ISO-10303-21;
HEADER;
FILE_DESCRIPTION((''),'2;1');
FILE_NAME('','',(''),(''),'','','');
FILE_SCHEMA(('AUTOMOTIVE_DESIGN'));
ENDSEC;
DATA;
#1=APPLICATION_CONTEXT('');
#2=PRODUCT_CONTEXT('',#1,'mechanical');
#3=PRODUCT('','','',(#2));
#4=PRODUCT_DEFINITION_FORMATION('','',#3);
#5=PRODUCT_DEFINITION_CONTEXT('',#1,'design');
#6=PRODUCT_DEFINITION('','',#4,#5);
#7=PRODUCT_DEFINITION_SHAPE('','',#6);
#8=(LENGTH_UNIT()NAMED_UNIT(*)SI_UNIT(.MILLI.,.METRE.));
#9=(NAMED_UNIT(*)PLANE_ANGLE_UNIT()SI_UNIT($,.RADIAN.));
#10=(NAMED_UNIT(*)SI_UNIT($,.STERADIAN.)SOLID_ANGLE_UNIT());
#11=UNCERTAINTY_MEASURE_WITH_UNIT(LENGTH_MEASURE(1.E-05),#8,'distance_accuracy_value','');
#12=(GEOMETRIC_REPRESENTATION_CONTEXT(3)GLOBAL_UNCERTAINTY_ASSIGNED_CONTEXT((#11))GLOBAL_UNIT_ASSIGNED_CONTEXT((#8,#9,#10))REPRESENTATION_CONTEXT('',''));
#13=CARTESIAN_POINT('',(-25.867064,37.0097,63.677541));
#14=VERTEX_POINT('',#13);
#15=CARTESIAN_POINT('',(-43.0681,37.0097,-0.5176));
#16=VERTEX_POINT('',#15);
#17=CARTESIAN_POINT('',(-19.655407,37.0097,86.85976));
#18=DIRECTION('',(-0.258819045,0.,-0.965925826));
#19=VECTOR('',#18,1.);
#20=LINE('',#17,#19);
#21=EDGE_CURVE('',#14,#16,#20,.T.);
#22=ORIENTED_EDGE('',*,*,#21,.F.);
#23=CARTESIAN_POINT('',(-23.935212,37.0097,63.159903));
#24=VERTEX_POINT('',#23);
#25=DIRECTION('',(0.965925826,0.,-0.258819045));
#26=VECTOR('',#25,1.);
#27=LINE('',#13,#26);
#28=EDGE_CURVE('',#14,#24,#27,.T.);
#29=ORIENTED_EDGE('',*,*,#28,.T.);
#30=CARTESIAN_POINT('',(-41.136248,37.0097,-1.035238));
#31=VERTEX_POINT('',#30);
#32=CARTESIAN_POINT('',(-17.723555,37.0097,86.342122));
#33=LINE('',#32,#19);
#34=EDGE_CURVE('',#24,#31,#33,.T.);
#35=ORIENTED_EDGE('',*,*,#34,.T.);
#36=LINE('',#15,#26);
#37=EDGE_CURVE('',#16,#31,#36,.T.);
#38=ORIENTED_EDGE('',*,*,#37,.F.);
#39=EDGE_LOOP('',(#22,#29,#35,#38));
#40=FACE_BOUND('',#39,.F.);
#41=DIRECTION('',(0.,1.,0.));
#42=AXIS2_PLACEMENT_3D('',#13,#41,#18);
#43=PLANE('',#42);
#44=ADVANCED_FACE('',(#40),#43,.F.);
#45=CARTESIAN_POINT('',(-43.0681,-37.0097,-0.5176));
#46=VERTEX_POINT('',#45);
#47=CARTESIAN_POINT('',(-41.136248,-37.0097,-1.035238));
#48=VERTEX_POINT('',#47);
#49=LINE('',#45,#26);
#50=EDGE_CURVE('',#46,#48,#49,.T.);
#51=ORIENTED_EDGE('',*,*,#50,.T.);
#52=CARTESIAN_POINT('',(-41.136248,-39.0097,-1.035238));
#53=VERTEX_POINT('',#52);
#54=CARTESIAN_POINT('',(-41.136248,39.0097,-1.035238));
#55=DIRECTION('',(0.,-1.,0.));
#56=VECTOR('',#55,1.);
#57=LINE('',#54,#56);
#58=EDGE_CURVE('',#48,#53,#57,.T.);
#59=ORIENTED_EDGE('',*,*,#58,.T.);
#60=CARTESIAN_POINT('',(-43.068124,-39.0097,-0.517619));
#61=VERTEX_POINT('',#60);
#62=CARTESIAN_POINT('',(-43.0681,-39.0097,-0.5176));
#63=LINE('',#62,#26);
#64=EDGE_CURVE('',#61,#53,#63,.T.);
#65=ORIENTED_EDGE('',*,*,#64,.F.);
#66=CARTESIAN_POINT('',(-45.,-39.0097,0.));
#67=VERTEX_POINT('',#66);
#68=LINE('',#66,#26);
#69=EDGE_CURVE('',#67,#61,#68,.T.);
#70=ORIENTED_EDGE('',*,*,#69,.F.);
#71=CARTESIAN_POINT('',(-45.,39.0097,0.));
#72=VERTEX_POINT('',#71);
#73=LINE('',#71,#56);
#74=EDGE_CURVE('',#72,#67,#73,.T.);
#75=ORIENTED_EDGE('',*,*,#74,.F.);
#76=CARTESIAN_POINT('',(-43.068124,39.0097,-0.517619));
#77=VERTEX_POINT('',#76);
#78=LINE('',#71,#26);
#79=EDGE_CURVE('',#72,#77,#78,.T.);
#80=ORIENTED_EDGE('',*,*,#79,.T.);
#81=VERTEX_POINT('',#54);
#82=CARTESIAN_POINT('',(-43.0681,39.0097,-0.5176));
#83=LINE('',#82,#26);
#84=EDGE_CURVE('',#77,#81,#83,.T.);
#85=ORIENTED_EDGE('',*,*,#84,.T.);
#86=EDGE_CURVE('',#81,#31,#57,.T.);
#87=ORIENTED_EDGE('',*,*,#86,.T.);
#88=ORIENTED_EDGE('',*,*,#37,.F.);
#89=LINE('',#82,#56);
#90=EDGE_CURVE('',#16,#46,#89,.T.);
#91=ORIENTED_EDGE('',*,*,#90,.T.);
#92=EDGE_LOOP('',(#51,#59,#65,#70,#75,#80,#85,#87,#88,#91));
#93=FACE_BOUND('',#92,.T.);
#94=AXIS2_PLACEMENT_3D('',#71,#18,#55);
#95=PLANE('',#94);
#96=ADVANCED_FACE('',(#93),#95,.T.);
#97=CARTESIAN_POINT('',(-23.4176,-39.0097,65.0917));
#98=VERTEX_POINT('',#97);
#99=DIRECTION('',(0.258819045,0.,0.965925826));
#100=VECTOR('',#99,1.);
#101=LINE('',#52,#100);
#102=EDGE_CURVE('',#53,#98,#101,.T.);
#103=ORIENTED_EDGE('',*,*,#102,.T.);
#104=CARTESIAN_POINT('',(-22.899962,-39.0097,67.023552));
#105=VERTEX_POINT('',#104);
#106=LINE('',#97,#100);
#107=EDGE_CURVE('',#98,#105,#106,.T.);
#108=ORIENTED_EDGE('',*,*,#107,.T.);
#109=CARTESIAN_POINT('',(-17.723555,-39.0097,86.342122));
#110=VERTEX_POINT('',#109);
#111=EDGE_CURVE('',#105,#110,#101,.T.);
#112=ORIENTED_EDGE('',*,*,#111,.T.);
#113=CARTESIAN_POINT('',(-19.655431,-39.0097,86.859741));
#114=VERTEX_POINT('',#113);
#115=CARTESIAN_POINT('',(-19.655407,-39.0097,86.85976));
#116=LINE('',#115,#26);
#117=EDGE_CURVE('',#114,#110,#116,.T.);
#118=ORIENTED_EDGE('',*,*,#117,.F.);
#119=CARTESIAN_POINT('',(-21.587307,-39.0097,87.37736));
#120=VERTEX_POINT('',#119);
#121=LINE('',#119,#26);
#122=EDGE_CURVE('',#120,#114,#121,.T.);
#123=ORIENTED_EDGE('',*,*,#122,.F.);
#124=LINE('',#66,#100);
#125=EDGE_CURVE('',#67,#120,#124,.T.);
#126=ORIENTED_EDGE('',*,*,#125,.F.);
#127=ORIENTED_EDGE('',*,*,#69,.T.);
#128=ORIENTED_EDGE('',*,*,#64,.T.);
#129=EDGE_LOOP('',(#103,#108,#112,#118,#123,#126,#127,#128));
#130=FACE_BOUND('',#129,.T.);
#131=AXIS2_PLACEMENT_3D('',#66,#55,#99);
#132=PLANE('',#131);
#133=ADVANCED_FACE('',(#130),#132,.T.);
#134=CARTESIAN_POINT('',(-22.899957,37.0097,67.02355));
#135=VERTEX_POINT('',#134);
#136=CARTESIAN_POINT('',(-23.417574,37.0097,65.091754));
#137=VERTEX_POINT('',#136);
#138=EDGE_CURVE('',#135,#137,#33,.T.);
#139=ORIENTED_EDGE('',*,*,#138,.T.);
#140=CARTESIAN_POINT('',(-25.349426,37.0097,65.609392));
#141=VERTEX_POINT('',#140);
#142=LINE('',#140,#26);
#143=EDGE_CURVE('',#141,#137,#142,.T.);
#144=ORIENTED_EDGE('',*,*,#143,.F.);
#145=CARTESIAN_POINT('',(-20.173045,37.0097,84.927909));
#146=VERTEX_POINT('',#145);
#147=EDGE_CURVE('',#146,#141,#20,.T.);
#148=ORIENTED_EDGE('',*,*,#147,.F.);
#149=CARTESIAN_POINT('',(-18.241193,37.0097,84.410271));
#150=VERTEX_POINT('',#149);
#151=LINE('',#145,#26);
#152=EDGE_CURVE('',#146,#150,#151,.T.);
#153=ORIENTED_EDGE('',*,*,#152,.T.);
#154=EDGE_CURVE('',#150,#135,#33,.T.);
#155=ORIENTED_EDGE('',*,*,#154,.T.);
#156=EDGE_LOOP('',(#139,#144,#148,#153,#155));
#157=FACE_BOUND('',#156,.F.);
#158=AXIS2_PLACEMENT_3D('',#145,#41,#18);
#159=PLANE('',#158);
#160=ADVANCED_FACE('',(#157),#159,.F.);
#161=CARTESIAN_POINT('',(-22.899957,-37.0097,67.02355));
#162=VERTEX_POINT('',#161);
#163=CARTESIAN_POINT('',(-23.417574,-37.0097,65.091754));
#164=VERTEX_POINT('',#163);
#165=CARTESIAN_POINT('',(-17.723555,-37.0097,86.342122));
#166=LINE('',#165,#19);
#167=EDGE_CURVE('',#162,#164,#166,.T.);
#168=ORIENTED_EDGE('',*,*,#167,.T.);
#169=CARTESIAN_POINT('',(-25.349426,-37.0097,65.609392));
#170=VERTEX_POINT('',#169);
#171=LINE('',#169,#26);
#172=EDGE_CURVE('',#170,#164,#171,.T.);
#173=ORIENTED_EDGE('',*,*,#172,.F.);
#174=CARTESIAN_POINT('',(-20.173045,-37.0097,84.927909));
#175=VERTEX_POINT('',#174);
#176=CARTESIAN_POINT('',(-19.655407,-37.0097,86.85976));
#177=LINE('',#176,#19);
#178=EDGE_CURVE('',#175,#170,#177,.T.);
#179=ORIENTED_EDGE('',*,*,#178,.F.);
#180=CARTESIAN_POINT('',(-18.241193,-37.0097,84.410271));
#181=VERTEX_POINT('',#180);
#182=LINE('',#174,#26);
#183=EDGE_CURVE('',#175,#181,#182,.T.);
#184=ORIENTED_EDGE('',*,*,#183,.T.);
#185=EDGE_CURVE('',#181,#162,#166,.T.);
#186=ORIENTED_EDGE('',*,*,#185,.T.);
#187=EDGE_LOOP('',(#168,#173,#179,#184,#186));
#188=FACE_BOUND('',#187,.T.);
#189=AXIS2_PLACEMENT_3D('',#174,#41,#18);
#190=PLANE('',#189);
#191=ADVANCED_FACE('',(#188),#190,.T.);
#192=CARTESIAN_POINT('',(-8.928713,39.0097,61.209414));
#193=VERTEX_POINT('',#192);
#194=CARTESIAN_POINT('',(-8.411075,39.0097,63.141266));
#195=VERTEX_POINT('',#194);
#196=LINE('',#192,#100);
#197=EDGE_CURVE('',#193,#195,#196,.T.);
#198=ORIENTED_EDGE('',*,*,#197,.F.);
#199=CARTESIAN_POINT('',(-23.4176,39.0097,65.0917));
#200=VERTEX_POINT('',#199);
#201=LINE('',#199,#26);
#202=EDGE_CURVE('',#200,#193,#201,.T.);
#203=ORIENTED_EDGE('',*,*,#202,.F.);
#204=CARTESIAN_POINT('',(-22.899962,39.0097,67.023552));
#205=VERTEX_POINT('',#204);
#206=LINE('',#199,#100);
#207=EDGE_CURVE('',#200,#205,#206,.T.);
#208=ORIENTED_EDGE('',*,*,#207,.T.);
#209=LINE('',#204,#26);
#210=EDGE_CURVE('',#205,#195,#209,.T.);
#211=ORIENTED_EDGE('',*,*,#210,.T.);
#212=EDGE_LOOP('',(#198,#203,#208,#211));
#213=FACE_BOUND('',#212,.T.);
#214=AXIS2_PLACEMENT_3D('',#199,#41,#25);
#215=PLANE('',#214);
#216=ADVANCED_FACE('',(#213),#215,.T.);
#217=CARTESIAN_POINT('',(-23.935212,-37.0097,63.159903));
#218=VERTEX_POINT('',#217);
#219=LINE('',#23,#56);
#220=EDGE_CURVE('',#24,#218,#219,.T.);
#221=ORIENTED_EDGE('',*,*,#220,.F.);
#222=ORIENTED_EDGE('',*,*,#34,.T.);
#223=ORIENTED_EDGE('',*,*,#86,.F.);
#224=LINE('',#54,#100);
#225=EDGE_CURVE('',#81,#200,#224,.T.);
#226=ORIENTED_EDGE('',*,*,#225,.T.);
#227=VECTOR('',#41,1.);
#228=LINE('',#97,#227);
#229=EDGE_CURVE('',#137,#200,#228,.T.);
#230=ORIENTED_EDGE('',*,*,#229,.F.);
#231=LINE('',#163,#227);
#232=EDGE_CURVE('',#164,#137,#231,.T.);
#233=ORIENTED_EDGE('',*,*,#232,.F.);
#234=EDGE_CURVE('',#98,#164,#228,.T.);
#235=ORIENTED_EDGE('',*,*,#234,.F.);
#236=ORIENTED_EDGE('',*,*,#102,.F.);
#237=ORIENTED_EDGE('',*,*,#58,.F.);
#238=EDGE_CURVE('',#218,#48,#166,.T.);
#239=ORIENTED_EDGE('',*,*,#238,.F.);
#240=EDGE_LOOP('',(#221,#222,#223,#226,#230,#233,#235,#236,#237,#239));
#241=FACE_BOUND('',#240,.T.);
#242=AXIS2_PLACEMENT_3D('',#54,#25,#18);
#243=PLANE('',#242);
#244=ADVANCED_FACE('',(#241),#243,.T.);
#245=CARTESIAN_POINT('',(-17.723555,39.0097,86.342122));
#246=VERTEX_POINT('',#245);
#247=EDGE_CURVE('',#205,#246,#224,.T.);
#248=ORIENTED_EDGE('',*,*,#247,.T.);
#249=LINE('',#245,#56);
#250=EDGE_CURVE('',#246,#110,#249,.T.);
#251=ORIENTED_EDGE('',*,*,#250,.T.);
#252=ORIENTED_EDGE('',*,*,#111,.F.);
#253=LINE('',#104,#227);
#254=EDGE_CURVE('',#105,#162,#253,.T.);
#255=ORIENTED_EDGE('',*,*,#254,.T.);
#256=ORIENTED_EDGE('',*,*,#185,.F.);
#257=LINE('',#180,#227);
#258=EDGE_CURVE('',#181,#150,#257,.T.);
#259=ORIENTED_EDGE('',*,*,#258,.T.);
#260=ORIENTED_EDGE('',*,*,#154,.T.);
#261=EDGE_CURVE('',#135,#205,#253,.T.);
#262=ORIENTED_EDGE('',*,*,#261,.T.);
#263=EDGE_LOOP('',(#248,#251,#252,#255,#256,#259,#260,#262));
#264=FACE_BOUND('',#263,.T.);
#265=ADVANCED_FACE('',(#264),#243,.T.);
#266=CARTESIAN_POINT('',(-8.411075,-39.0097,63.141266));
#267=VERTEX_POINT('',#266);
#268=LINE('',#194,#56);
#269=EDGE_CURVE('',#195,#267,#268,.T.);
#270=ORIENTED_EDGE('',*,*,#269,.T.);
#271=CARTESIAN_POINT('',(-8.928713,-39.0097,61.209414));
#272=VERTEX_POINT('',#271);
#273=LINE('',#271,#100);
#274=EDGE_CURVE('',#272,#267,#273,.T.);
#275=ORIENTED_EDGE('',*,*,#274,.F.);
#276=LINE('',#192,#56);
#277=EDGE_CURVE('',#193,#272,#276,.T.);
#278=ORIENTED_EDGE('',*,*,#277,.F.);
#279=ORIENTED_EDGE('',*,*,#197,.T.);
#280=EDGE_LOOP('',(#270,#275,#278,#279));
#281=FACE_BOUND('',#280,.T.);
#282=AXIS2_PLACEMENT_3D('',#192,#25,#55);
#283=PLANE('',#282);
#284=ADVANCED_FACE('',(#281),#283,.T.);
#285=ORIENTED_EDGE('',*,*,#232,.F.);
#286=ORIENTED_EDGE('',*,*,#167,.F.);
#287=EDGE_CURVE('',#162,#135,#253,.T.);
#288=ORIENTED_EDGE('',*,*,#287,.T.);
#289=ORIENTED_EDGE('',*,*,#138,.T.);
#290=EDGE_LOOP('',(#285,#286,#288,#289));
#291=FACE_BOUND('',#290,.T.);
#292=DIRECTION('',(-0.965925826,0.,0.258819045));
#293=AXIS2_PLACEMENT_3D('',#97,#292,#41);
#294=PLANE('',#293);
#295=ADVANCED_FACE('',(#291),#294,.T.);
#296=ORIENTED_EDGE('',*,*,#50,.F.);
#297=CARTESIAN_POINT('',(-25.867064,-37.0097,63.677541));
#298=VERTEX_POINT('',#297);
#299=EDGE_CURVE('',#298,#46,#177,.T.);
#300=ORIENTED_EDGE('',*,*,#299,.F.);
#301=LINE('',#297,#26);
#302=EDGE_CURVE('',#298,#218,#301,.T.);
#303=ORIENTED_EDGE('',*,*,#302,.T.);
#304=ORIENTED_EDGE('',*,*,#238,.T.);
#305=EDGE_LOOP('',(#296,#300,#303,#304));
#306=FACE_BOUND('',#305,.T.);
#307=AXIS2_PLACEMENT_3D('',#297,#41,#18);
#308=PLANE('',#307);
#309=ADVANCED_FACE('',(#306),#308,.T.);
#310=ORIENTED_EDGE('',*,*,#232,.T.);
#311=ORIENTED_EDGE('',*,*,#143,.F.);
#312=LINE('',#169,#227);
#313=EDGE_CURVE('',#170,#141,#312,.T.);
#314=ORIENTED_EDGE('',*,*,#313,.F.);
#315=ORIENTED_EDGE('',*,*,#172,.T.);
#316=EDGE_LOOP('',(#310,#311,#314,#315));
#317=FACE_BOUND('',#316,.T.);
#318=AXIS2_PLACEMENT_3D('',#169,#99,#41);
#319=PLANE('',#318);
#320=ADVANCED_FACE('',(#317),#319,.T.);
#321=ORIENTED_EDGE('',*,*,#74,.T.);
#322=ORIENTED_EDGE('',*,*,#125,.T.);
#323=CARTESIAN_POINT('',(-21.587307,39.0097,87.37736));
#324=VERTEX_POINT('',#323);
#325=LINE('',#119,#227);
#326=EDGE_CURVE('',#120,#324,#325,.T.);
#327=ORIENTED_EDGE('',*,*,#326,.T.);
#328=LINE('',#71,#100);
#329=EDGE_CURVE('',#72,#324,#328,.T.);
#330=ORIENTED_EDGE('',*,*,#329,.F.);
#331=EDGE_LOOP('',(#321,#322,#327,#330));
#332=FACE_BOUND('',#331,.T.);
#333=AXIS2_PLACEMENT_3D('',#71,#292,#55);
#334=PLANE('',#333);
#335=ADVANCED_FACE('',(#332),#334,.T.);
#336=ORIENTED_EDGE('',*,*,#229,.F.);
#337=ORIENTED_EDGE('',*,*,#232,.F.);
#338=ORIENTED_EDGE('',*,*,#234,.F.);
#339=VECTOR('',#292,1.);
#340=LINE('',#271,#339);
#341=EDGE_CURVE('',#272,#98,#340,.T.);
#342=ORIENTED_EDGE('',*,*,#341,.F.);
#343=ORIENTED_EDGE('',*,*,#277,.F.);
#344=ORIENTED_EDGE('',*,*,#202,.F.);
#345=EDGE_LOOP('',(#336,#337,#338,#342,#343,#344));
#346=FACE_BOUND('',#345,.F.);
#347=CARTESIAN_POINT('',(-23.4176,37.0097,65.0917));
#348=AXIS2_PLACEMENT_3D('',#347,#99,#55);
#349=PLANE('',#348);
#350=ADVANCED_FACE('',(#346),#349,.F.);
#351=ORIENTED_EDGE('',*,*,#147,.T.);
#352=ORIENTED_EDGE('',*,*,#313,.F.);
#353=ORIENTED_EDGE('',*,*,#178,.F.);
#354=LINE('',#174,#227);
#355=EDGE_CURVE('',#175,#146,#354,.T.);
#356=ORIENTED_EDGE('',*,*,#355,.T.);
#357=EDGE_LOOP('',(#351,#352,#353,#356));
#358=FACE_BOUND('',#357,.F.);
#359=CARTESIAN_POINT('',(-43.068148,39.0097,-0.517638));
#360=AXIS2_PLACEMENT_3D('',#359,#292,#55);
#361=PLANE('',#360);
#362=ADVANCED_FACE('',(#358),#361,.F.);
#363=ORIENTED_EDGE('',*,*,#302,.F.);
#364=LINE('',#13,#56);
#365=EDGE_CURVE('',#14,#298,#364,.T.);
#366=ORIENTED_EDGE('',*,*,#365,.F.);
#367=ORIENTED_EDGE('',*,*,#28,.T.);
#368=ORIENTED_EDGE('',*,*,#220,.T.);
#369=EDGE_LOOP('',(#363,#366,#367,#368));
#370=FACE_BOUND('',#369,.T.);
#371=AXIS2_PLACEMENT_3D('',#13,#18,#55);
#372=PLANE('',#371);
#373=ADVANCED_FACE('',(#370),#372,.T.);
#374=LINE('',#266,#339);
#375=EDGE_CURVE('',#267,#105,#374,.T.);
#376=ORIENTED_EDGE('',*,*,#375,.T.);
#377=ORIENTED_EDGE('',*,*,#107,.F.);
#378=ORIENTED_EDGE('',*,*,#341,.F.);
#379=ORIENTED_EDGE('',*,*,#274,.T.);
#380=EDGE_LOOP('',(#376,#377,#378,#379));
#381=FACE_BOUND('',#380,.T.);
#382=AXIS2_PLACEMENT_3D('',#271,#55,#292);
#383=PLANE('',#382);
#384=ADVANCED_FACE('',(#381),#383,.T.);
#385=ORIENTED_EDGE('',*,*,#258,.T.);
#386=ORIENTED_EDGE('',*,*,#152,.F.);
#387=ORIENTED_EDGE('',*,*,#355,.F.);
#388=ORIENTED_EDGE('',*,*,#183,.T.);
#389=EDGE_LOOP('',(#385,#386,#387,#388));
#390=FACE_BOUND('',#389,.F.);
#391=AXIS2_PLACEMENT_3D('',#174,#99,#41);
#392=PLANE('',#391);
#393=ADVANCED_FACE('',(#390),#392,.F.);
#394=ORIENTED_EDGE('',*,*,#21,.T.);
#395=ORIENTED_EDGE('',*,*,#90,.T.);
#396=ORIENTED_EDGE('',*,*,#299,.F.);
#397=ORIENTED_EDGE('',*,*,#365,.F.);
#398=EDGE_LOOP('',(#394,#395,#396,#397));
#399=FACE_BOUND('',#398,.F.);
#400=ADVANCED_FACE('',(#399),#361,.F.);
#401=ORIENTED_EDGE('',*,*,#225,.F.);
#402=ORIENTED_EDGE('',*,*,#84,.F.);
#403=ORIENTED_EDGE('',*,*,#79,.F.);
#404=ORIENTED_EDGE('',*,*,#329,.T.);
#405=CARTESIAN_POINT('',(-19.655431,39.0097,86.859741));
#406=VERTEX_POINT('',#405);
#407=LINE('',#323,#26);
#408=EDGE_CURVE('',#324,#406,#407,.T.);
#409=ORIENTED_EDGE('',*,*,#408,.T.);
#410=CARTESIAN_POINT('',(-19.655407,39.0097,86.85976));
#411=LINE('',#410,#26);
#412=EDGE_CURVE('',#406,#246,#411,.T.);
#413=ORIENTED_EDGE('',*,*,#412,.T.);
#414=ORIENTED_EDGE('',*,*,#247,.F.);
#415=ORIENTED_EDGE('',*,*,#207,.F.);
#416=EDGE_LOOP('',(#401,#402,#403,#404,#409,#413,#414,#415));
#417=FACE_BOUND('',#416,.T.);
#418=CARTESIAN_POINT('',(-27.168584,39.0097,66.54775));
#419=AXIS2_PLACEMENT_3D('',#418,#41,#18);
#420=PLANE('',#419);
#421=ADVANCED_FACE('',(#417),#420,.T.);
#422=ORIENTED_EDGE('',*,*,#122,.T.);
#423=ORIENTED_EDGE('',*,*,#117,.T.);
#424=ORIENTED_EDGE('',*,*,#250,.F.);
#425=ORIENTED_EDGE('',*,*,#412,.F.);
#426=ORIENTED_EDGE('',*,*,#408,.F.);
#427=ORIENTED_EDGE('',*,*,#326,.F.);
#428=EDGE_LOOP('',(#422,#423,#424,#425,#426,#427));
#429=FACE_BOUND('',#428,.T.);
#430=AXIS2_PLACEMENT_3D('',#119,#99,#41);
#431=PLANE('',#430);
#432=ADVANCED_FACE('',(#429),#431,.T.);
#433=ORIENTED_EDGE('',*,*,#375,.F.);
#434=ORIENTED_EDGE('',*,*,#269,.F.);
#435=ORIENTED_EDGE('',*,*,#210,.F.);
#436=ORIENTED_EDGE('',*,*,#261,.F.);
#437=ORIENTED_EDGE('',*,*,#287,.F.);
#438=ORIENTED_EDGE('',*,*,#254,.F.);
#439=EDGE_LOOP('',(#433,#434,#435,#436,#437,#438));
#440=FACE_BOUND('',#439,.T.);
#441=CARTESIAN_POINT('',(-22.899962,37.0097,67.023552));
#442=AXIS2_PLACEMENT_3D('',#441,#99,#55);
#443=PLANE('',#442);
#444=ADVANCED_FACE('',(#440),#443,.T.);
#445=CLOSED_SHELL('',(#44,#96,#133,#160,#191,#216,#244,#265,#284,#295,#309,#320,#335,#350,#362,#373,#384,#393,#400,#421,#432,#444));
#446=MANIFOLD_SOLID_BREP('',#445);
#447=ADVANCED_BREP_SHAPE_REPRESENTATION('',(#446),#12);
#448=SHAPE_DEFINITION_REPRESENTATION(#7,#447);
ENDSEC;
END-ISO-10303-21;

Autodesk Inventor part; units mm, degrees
ref_plane "YZ Plane" through (0, 0, 0) normal (1, 0, 0) x (0, 1, 0)
ref_plane "XZ Plane" through (0, 0, 0) normal (0, 1, 0) x (-1, 0, 0)
ref_plane "XY Plane" through (0, 0, 0) normal (0, 0, 1) x (1, 0, 0)
ref_plane "РабПлоскость1" through (-45, 39.0097, 0) normal (-0.9659258, 0, 0.258819) x (0, -1, 0)
sketch "Эскиз1" plane through (-45, 39.0097, 0) normal (-0.9659258, 0, 0.258819) x (0, -1, 0)
  line L0 (0, 0) -> (78.0194, 0) projected
  line L1 (0.0194, 85.4597) -> (78.0194, 85.4597) projected
  line L2 (78.0194, 68.8953) -> (78.0194, 85.4597) projected
  line L3 (-2.9723, 68.8953) -> (78.0194, 68.8953) projected
  line L4 (-2.9723, 68.8953) -> (-2.9723, 74.9718) projected
  ellipse E0 centre (-19.9806, 77.6951) end of major axis (0.0194, 77.6951) minor radius 5.1764 (-2.9723, 74.9718) -> (0.0194, 77.6951) ccw projected
  line L5 (0.0194, 80.2833) -> (0.0194, 77.6951) projected
  line L6 (0.0194, 80.2833) -> (0.0194, 85.4597) projected
  line L7 (0, 0) -> (78.0194, 0)
  line L8 (78.0194, 0) -> (78.0194, 90.4597)
  line L9 (78.0194, 90.4597) -> (0, 90.4597)
  line L10 (0, 90.4597) -> (0, 0)
  point P0 (39.0097, 11.6469)
  dimension "d1" = 5
extrude "Выдавливание1" add sketch "Эскиз1" against normal blind 2 contours L10 L3 L8 L0 | L10 E0 L5 L6 L1 L2 L3 | L10 L9 L8 L1 L6 L5 E0
sketch "Эскиз2" plane through (-43.0681, 39.0097, -0.5176) normal (0.9659258, 0, -0.258819) x (-0.258819, 0, -0.9659258)
  line L0 (0, 0) -> (0, -78.0194) projected
  line L1 (0, -78.0194) -> (-90.4597, -78.0194)
  line L2 (-90.4597, -78.0194) -> (-90.4597, -76.0194)
  line L3 (-90.4597, -76.0194) -> (0, -76.0194)
  line L4 (0, -76.0194) -> (0, -78.0194)
  line L5 (0, 0) -> (-90.4597, 0)
  line L6 (-90.4597, 0) -> (-90.4597, -2)
  line L7 (-90.4597, -2) -> (0, -2)
  line L8 (0, -2) -> (0, 0)
  line L9 (-90.4597, -78.0194) -> (-90.4597, 0) projected
  line L10 (-90.4597, -76.0194) -> (-88.4597, -76.0194)
  line L11 (-88.4597, -76.0194) -> (-88.4597, -2)
  line L12 (-88.4597, -2) -> (-90.4597, -2)
  line L13 (-90.4597, -2) -> (-90.4597, -76.0194)
  line L14 (-66.4597, -76.0194) -> (-68.4597, -76.0194)
  line L15 (-68.4597, -76.0194) -> (-68.4597, -2)
  line L16 (-68.4597, -2) -> (-66.4597, -2)
  line L17 (-66.4597, -2) -> (-66.4597, -76.0194)
  point P0 (-11.6469, -39.0097)
  point P1 (-90.4597, -1)
  point P2 (-90.4597, -77.0194)
  point P3 (-89.4597, -2)
  point P4 (-90.4597, -76.0194)
  point P5 (0, -76.0194)
  point P6 (-66.4597, -2)
  point P7 (0, -2)
  point P8 (-90.4597, -2)
  point P9 (-88.4597, -76.0194)
  point P10 (-88.4597, -2)
  dimension "d4" = 2
  dimension "d5" = 2
  dimension "d6" = 2
  dimension "d7" = 2
  dimension "d8" = 20
extrude "Выдавливание2" add sketch "Эскиз2" along normal blind 2 contours L0 L7 L6 L5 | L0 L1 L2 L3 | L17 L3 L15 L7 | L7 L11 L3 L9
ref_plane "РабПлоскость2" through (-23.4176, 37.0097, 65.0917) normal (0.258819, 0, 0.9659258) x (0, -1, 0)
sketch "Эскиз3" plane through (-23.4176, 37.0097, 65.0917) normal (0.258819, 0, 0.9659258) x (0, -1, 0)
  line L0 (-2, 0) -> (76.0194, 0) projected
  point P0 (37.0097, 39.4667)
sketch "Эскиз4" plane through (-23.4176, 37.0097, 65.0917) normal (0.258819, 0, 0.9659258) x (0, -1, 0)
  line L0 (76.0194, 0) -> (-2, 0)
  line L1 (-2, 0) -> (-2, 15)
  line L2 (-2, 15) -> (76.0194, 15)
  line L3 (76.0194, 15) -> (76.0194, 0)
  point P0 (37.0097, 39.4667)
  dimension "d12" = 15
extrude "Выдавливание3" add sketch "Эскиз4" along normal blind 2
properties part number "ДИ 00.00.09"
